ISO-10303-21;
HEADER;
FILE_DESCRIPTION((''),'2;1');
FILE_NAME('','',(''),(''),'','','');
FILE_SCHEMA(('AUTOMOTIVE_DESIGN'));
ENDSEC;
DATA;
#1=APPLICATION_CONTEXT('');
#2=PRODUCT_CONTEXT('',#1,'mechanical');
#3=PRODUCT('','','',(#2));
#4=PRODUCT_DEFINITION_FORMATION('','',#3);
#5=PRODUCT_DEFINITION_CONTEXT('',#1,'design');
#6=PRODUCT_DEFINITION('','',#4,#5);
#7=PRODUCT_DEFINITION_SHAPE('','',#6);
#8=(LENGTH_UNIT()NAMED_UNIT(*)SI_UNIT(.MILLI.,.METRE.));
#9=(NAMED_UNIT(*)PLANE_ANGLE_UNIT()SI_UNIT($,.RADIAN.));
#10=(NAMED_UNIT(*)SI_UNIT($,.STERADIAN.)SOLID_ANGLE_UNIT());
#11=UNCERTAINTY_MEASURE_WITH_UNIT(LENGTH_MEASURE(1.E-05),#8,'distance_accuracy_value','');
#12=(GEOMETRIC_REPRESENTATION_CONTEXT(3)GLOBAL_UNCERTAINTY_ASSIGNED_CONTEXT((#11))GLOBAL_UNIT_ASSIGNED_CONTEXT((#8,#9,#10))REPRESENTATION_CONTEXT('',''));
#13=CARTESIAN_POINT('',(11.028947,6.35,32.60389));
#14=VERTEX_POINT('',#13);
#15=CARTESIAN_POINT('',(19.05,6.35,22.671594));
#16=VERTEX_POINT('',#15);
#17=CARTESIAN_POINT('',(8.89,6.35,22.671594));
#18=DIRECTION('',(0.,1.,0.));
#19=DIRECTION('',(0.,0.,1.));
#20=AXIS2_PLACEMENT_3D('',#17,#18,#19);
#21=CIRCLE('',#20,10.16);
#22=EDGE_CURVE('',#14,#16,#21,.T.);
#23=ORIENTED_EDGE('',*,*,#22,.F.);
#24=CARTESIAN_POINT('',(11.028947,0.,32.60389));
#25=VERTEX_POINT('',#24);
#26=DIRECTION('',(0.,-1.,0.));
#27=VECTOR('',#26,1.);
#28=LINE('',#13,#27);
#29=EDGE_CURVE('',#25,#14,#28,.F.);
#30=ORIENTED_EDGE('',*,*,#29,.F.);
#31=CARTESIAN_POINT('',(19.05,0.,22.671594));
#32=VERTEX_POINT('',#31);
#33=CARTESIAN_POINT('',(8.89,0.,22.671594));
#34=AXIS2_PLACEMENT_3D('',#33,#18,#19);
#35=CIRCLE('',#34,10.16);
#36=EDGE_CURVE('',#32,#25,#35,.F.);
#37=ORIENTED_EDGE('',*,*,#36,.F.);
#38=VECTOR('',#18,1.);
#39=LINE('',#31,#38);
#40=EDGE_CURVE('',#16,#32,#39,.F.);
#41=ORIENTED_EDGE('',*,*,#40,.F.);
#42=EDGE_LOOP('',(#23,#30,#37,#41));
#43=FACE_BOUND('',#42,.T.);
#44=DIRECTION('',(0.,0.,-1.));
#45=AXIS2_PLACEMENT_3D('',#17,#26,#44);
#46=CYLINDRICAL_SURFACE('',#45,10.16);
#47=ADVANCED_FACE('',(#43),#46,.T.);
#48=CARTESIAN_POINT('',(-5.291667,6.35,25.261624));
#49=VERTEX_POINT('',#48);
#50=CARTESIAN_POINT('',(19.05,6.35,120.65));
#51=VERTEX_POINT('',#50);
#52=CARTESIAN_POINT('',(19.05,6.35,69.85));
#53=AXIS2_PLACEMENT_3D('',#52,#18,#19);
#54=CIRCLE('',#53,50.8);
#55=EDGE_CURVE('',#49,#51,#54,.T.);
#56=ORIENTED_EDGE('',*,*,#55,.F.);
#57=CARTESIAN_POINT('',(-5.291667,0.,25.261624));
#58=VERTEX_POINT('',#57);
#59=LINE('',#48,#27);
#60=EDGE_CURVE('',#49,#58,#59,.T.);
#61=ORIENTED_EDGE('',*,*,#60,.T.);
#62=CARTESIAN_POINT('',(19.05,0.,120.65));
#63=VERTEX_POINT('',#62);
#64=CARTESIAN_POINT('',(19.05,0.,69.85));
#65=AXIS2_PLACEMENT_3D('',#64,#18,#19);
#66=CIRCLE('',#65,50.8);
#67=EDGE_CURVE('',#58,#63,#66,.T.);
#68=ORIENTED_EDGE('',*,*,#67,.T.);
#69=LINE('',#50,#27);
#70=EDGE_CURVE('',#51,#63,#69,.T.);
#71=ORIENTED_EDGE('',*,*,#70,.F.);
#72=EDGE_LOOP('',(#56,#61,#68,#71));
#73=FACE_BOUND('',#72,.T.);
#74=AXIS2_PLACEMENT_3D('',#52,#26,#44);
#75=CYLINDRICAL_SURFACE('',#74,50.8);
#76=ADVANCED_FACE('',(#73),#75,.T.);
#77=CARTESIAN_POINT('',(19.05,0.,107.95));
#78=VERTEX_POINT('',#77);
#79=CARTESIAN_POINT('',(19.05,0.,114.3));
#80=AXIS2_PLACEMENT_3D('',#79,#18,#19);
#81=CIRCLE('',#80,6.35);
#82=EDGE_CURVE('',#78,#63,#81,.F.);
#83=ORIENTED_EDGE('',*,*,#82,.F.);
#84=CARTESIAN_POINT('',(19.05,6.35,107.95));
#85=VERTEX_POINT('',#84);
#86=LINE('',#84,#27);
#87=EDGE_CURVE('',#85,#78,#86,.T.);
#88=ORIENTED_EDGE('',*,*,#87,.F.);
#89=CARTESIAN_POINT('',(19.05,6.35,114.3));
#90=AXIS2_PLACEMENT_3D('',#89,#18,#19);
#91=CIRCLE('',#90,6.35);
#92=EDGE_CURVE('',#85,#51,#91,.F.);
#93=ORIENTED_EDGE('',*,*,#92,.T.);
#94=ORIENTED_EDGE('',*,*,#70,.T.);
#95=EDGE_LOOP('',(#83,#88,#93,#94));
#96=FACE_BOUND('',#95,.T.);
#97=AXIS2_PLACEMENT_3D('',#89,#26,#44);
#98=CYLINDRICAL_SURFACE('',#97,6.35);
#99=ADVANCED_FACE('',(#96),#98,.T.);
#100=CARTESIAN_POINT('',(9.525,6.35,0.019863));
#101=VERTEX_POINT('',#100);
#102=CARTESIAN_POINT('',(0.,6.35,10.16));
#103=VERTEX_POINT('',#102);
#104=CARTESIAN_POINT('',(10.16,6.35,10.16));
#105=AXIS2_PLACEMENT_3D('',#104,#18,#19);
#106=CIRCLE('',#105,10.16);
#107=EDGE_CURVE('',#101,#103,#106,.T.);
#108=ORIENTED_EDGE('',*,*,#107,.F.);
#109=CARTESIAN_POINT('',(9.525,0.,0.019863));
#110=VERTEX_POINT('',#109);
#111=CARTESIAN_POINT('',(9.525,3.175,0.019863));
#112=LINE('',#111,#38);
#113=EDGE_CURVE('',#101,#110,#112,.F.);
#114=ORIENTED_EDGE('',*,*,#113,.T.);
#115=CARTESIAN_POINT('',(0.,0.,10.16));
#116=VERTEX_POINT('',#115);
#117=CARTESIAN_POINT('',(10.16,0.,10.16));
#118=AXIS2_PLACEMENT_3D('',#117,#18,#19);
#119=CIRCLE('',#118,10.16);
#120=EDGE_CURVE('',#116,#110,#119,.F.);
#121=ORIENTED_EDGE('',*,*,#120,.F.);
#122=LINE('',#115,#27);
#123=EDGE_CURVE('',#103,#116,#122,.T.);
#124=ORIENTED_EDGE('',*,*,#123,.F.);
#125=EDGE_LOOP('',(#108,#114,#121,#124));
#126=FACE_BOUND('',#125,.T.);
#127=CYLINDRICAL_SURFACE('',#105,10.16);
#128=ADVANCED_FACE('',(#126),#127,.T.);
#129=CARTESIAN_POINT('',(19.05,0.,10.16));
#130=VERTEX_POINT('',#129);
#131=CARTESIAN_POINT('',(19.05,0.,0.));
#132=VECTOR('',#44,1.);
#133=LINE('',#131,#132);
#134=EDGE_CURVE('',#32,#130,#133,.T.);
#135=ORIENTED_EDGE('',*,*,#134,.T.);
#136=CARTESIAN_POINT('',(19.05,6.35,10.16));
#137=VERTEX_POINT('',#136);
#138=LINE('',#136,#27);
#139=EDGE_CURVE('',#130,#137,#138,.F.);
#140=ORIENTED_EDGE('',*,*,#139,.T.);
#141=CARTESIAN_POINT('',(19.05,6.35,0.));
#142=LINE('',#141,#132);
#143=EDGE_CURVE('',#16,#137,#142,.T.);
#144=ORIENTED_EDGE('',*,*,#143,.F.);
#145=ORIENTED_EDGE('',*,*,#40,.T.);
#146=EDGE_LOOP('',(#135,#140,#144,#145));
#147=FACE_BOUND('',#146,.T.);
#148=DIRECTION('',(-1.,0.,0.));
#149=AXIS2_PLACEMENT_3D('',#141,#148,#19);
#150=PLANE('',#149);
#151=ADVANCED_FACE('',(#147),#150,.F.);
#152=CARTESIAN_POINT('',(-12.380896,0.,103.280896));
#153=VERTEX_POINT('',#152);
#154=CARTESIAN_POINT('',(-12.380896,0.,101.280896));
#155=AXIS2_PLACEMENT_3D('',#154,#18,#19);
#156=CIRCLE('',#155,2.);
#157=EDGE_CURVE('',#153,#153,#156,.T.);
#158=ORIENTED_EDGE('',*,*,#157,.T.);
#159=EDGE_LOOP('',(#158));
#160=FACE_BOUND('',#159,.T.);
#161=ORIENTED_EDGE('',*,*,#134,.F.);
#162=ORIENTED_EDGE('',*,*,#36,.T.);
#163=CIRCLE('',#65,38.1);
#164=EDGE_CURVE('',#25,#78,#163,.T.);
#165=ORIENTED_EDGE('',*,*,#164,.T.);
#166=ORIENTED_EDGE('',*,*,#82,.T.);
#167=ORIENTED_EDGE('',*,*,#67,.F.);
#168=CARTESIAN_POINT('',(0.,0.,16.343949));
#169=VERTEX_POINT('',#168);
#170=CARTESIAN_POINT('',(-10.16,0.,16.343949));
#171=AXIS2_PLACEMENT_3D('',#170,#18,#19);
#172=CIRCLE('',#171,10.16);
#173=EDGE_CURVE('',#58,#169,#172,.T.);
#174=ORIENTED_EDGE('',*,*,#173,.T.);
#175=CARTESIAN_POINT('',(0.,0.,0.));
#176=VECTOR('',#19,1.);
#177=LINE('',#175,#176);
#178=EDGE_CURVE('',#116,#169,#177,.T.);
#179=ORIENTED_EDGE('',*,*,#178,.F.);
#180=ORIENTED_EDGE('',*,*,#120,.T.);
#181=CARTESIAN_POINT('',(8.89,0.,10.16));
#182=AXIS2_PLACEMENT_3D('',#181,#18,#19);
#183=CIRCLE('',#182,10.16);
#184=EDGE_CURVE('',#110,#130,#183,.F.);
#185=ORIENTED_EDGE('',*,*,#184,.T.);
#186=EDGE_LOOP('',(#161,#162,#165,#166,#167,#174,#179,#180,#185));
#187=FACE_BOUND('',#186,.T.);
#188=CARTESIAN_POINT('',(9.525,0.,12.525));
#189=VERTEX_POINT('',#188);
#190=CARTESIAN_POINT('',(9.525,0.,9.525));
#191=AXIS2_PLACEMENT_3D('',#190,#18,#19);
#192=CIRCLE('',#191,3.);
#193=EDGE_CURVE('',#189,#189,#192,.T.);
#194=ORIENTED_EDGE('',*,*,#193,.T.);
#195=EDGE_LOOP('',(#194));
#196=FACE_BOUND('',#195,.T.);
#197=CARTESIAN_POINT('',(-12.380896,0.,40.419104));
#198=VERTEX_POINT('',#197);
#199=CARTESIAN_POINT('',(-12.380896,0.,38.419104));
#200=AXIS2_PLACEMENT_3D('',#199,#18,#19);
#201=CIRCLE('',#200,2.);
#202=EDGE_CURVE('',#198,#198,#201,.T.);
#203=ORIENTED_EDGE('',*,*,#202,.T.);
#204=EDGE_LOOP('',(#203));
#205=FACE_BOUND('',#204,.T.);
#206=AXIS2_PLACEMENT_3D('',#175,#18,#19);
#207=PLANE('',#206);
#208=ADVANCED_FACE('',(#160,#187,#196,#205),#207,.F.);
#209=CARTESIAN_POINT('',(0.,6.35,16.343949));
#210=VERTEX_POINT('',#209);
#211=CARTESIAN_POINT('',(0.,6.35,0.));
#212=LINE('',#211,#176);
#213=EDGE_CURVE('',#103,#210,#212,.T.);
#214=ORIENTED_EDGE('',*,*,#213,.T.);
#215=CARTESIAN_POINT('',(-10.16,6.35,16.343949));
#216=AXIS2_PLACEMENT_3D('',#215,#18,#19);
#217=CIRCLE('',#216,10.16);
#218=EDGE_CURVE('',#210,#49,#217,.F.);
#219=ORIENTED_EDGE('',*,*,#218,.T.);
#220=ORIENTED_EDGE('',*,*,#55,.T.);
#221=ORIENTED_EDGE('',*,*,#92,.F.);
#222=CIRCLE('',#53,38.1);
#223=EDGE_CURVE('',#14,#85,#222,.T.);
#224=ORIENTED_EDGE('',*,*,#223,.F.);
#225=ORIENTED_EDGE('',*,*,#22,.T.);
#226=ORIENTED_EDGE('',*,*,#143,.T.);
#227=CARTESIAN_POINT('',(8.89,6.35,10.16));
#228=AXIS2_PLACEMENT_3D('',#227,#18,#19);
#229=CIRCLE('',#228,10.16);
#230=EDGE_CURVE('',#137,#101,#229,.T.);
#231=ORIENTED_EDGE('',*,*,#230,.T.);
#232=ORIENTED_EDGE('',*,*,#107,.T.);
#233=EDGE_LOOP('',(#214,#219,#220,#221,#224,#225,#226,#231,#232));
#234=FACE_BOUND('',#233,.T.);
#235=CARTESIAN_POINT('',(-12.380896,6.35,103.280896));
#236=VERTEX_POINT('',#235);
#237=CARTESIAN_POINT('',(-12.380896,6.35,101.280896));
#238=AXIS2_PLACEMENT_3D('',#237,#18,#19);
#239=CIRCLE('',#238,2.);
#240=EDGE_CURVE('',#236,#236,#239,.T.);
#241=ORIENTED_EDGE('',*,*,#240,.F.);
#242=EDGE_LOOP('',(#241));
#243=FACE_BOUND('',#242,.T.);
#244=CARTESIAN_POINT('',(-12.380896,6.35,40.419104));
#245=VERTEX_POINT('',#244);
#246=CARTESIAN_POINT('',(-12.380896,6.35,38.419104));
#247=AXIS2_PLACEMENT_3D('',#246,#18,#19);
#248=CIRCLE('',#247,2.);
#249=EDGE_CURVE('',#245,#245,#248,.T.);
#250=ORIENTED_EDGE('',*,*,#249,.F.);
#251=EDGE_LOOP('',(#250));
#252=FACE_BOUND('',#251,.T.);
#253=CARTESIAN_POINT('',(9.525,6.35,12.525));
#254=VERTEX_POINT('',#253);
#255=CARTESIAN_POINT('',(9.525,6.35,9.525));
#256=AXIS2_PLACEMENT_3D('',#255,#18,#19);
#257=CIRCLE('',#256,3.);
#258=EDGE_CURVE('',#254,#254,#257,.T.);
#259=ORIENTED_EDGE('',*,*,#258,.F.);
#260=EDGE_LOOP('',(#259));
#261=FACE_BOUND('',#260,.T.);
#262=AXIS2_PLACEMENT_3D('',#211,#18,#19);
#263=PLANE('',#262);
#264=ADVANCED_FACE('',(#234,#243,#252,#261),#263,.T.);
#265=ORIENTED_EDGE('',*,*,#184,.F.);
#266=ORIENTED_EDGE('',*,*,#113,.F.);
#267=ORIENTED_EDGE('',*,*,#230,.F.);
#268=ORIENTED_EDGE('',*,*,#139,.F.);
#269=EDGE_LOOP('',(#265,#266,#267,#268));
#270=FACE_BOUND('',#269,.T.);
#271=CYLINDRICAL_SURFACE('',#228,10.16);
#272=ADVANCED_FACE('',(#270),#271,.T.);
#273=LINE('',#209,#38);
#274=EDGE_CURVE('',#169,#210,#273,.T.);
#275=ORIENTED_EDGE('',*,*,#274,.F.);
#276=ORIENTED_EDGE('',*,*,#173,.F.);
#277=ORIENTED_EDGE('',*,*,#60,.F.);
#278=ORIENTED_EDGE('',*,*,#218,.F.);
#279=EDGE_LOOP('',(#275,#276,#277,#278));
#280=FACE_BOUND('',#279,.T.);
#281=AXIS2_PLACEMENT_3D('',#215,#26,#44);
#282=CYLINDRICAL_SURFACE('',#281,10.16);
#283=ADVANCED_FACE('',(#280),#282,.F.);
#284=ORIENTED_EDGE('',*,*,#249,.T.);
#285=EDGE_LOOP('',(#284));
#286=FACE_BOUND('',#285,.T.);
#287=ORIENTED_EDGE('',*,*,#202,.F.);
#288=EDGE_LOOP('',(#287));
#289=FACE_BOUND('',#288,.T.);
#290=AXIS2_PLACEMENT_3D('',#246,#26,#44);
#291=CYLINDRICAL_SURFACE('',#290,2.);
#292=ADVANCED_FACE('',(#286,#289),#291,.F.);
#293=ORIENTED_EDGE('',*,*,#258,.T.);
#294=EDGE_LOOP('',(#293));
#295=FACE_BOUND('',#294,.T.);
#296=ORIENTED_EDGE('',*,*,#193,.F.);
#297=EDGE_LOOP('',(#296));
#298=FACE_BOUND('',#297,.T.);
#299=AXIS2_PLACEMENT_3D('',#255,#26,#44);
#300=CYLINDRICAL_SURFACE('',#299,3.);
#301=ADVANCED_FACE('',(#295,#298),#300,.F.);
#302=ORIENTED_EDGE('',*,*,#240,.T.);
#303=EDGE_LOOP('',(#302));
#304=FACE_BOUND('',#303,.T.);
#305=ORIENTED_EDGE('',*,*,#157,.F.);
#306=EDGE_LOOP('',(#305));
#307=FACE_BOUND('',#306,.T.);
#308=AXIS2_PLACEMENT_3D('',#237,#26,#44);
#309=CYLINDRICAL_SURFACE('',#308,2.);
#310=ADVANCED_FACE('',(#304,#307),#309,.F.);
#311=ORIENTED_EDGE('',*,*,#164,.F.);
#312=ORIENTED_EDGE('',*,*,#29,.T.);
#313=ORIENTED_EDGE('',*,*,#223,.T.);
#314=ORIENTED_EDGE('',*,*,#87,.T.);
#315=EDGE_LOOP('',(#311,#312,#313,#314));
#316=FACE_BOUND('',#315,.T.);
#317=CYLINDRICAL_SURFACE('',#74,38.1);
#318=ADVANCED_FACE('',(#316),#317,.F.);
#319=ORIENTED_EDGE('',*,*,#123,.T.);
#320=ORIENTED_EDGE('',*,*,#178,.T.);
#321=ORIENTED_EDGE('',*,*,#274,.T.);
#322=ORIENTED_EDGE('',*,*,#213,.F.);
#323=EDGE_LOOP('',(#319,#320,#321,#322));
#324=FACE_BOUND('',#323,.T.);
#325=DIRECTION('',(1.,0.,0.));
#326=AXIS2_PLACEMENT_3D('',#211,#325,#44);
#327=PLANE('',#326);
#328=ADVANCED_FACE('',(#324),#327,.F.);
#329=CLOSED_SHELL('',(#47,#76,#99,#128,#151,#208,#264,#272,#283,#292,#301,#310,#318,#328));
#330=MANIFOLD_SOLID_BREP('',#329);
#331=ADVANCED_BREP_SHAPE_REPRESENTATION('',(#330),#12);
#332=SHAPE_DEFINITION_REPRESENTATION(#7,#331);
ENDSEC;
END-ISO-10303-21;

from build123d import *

# Parameters (mm, degrees)
SKETCH1_R           = 3
SKETCH1_R_2         = 2
BOSS_EXTRUDE1_DEPTH = 6.35
FILLET1_R           = 10.16


with BuildPart() as part:
    # Sketch1 → Boss-Extrude1 (new body)
    with BuildSketch(Plane(origin=(0, 0, 0), x_dir=(1, 0, 0), z_dir=(0, 1, 0))):
        with BuildLine():
            Line((19.05, 0), (0, 0))
            Line((0, 0), (0, -22.757139607))
            ThreePointArc((0, -22.757139607), (-30.814603217, -79.553676933), (19.05, -120.65))
            ThreePointArc((19.05, -120.65), (25.4, -114.3), (19.05, -107.95))
            ThreePointArc((19.05, -107.95), (-19.05, -69.85), (19.05, -31.75))
            Line((19.05, -31.75), (19.05, 0))
        make_face()
        with Locations(Location((9.525, -9.525, 0), (0, 0, 270))):
            Circle(SKETCH1_R, mode=Mode.SUBTRACT)
        with Locations(Location((-12.380896424, -38.419103576, 0), (0, 0, 270))):
            Circle(SKETCH1_R_2, mode=Mode.SUBTRACT)
        with Locations(Location((-12.380896424, -101.280896424, 0), (0, 0, 270))):
            Circle(SKETCH1_R_2, mode=Mode.SUBTRACT)
    extrude(amount=BOSS_EXTRUDE1_DEPTH)

    # Fillet1
    # the kernel refuses this fillet: 10.16 mm, written as the material it adds along each edge
    with BuildSketch(Plane(origin=(0, 0, 22.757139607), x_dir=(0, 0, -1), z_dir=(0, 1, 0))) as fillet1_piece_1:
        with BuildLine():
            CenterArc((6.413190667, 10.16), FILLET1_R, 208.630989837, 61.369010163)
            ThreePointArc((-2.50448451, 5.291666667), (-1.175949507, 2.681941807), (0, 0))
            Line((0, 0), (6.413190667, 0))
        make_face()
    extrude(amount=6.35)
    # the kernel refuses this fillet: 10.16 mm, written as the material it takes off along each edge
    with BuildSketch(Plane(origin=(19.05, -22.696015193, 31.75), x_dir=(0, 0, -1), z_dir=(0, 1, 0))) as fillet1_2_piece_1:
        with BuildLine():
            CenterArc((9.078406077, 10.16), FILLET1_R, 192.153197469, 77.846802531)
            ThreePointArc((-0.853889939, 8.021052632), (-0.214073897, 4.033187739), (0, 0))
            Line((0, 0), (9.078406077, 0))
        make_face()
    extrude(amount=51.742030387, mode=Mode.SUBTRACT)
    with BuildSketch(Plane(origin=(0, -25.4, 0), x_dir=(1, 0, 0), z_dir=(0, 1, 0)), Plane(origin=(19.05, -25.4, 0), x_dir=(0, 0, 1), z_dir=(0, 1, 0))) as fillet1_2_piece_2:
        with BuildLine():
            CenterArc((FILLET1_R, -FILLET1_R), FILLET1_R, 90, 90)
            Line((0, -FILLET1_R), (0, 0))
            Line((0, 0), (FILLET1_R, 0))
        make_face()
    extrude(amount=57.15, mode=Mode.SUBTRACT)


solid = part.part
